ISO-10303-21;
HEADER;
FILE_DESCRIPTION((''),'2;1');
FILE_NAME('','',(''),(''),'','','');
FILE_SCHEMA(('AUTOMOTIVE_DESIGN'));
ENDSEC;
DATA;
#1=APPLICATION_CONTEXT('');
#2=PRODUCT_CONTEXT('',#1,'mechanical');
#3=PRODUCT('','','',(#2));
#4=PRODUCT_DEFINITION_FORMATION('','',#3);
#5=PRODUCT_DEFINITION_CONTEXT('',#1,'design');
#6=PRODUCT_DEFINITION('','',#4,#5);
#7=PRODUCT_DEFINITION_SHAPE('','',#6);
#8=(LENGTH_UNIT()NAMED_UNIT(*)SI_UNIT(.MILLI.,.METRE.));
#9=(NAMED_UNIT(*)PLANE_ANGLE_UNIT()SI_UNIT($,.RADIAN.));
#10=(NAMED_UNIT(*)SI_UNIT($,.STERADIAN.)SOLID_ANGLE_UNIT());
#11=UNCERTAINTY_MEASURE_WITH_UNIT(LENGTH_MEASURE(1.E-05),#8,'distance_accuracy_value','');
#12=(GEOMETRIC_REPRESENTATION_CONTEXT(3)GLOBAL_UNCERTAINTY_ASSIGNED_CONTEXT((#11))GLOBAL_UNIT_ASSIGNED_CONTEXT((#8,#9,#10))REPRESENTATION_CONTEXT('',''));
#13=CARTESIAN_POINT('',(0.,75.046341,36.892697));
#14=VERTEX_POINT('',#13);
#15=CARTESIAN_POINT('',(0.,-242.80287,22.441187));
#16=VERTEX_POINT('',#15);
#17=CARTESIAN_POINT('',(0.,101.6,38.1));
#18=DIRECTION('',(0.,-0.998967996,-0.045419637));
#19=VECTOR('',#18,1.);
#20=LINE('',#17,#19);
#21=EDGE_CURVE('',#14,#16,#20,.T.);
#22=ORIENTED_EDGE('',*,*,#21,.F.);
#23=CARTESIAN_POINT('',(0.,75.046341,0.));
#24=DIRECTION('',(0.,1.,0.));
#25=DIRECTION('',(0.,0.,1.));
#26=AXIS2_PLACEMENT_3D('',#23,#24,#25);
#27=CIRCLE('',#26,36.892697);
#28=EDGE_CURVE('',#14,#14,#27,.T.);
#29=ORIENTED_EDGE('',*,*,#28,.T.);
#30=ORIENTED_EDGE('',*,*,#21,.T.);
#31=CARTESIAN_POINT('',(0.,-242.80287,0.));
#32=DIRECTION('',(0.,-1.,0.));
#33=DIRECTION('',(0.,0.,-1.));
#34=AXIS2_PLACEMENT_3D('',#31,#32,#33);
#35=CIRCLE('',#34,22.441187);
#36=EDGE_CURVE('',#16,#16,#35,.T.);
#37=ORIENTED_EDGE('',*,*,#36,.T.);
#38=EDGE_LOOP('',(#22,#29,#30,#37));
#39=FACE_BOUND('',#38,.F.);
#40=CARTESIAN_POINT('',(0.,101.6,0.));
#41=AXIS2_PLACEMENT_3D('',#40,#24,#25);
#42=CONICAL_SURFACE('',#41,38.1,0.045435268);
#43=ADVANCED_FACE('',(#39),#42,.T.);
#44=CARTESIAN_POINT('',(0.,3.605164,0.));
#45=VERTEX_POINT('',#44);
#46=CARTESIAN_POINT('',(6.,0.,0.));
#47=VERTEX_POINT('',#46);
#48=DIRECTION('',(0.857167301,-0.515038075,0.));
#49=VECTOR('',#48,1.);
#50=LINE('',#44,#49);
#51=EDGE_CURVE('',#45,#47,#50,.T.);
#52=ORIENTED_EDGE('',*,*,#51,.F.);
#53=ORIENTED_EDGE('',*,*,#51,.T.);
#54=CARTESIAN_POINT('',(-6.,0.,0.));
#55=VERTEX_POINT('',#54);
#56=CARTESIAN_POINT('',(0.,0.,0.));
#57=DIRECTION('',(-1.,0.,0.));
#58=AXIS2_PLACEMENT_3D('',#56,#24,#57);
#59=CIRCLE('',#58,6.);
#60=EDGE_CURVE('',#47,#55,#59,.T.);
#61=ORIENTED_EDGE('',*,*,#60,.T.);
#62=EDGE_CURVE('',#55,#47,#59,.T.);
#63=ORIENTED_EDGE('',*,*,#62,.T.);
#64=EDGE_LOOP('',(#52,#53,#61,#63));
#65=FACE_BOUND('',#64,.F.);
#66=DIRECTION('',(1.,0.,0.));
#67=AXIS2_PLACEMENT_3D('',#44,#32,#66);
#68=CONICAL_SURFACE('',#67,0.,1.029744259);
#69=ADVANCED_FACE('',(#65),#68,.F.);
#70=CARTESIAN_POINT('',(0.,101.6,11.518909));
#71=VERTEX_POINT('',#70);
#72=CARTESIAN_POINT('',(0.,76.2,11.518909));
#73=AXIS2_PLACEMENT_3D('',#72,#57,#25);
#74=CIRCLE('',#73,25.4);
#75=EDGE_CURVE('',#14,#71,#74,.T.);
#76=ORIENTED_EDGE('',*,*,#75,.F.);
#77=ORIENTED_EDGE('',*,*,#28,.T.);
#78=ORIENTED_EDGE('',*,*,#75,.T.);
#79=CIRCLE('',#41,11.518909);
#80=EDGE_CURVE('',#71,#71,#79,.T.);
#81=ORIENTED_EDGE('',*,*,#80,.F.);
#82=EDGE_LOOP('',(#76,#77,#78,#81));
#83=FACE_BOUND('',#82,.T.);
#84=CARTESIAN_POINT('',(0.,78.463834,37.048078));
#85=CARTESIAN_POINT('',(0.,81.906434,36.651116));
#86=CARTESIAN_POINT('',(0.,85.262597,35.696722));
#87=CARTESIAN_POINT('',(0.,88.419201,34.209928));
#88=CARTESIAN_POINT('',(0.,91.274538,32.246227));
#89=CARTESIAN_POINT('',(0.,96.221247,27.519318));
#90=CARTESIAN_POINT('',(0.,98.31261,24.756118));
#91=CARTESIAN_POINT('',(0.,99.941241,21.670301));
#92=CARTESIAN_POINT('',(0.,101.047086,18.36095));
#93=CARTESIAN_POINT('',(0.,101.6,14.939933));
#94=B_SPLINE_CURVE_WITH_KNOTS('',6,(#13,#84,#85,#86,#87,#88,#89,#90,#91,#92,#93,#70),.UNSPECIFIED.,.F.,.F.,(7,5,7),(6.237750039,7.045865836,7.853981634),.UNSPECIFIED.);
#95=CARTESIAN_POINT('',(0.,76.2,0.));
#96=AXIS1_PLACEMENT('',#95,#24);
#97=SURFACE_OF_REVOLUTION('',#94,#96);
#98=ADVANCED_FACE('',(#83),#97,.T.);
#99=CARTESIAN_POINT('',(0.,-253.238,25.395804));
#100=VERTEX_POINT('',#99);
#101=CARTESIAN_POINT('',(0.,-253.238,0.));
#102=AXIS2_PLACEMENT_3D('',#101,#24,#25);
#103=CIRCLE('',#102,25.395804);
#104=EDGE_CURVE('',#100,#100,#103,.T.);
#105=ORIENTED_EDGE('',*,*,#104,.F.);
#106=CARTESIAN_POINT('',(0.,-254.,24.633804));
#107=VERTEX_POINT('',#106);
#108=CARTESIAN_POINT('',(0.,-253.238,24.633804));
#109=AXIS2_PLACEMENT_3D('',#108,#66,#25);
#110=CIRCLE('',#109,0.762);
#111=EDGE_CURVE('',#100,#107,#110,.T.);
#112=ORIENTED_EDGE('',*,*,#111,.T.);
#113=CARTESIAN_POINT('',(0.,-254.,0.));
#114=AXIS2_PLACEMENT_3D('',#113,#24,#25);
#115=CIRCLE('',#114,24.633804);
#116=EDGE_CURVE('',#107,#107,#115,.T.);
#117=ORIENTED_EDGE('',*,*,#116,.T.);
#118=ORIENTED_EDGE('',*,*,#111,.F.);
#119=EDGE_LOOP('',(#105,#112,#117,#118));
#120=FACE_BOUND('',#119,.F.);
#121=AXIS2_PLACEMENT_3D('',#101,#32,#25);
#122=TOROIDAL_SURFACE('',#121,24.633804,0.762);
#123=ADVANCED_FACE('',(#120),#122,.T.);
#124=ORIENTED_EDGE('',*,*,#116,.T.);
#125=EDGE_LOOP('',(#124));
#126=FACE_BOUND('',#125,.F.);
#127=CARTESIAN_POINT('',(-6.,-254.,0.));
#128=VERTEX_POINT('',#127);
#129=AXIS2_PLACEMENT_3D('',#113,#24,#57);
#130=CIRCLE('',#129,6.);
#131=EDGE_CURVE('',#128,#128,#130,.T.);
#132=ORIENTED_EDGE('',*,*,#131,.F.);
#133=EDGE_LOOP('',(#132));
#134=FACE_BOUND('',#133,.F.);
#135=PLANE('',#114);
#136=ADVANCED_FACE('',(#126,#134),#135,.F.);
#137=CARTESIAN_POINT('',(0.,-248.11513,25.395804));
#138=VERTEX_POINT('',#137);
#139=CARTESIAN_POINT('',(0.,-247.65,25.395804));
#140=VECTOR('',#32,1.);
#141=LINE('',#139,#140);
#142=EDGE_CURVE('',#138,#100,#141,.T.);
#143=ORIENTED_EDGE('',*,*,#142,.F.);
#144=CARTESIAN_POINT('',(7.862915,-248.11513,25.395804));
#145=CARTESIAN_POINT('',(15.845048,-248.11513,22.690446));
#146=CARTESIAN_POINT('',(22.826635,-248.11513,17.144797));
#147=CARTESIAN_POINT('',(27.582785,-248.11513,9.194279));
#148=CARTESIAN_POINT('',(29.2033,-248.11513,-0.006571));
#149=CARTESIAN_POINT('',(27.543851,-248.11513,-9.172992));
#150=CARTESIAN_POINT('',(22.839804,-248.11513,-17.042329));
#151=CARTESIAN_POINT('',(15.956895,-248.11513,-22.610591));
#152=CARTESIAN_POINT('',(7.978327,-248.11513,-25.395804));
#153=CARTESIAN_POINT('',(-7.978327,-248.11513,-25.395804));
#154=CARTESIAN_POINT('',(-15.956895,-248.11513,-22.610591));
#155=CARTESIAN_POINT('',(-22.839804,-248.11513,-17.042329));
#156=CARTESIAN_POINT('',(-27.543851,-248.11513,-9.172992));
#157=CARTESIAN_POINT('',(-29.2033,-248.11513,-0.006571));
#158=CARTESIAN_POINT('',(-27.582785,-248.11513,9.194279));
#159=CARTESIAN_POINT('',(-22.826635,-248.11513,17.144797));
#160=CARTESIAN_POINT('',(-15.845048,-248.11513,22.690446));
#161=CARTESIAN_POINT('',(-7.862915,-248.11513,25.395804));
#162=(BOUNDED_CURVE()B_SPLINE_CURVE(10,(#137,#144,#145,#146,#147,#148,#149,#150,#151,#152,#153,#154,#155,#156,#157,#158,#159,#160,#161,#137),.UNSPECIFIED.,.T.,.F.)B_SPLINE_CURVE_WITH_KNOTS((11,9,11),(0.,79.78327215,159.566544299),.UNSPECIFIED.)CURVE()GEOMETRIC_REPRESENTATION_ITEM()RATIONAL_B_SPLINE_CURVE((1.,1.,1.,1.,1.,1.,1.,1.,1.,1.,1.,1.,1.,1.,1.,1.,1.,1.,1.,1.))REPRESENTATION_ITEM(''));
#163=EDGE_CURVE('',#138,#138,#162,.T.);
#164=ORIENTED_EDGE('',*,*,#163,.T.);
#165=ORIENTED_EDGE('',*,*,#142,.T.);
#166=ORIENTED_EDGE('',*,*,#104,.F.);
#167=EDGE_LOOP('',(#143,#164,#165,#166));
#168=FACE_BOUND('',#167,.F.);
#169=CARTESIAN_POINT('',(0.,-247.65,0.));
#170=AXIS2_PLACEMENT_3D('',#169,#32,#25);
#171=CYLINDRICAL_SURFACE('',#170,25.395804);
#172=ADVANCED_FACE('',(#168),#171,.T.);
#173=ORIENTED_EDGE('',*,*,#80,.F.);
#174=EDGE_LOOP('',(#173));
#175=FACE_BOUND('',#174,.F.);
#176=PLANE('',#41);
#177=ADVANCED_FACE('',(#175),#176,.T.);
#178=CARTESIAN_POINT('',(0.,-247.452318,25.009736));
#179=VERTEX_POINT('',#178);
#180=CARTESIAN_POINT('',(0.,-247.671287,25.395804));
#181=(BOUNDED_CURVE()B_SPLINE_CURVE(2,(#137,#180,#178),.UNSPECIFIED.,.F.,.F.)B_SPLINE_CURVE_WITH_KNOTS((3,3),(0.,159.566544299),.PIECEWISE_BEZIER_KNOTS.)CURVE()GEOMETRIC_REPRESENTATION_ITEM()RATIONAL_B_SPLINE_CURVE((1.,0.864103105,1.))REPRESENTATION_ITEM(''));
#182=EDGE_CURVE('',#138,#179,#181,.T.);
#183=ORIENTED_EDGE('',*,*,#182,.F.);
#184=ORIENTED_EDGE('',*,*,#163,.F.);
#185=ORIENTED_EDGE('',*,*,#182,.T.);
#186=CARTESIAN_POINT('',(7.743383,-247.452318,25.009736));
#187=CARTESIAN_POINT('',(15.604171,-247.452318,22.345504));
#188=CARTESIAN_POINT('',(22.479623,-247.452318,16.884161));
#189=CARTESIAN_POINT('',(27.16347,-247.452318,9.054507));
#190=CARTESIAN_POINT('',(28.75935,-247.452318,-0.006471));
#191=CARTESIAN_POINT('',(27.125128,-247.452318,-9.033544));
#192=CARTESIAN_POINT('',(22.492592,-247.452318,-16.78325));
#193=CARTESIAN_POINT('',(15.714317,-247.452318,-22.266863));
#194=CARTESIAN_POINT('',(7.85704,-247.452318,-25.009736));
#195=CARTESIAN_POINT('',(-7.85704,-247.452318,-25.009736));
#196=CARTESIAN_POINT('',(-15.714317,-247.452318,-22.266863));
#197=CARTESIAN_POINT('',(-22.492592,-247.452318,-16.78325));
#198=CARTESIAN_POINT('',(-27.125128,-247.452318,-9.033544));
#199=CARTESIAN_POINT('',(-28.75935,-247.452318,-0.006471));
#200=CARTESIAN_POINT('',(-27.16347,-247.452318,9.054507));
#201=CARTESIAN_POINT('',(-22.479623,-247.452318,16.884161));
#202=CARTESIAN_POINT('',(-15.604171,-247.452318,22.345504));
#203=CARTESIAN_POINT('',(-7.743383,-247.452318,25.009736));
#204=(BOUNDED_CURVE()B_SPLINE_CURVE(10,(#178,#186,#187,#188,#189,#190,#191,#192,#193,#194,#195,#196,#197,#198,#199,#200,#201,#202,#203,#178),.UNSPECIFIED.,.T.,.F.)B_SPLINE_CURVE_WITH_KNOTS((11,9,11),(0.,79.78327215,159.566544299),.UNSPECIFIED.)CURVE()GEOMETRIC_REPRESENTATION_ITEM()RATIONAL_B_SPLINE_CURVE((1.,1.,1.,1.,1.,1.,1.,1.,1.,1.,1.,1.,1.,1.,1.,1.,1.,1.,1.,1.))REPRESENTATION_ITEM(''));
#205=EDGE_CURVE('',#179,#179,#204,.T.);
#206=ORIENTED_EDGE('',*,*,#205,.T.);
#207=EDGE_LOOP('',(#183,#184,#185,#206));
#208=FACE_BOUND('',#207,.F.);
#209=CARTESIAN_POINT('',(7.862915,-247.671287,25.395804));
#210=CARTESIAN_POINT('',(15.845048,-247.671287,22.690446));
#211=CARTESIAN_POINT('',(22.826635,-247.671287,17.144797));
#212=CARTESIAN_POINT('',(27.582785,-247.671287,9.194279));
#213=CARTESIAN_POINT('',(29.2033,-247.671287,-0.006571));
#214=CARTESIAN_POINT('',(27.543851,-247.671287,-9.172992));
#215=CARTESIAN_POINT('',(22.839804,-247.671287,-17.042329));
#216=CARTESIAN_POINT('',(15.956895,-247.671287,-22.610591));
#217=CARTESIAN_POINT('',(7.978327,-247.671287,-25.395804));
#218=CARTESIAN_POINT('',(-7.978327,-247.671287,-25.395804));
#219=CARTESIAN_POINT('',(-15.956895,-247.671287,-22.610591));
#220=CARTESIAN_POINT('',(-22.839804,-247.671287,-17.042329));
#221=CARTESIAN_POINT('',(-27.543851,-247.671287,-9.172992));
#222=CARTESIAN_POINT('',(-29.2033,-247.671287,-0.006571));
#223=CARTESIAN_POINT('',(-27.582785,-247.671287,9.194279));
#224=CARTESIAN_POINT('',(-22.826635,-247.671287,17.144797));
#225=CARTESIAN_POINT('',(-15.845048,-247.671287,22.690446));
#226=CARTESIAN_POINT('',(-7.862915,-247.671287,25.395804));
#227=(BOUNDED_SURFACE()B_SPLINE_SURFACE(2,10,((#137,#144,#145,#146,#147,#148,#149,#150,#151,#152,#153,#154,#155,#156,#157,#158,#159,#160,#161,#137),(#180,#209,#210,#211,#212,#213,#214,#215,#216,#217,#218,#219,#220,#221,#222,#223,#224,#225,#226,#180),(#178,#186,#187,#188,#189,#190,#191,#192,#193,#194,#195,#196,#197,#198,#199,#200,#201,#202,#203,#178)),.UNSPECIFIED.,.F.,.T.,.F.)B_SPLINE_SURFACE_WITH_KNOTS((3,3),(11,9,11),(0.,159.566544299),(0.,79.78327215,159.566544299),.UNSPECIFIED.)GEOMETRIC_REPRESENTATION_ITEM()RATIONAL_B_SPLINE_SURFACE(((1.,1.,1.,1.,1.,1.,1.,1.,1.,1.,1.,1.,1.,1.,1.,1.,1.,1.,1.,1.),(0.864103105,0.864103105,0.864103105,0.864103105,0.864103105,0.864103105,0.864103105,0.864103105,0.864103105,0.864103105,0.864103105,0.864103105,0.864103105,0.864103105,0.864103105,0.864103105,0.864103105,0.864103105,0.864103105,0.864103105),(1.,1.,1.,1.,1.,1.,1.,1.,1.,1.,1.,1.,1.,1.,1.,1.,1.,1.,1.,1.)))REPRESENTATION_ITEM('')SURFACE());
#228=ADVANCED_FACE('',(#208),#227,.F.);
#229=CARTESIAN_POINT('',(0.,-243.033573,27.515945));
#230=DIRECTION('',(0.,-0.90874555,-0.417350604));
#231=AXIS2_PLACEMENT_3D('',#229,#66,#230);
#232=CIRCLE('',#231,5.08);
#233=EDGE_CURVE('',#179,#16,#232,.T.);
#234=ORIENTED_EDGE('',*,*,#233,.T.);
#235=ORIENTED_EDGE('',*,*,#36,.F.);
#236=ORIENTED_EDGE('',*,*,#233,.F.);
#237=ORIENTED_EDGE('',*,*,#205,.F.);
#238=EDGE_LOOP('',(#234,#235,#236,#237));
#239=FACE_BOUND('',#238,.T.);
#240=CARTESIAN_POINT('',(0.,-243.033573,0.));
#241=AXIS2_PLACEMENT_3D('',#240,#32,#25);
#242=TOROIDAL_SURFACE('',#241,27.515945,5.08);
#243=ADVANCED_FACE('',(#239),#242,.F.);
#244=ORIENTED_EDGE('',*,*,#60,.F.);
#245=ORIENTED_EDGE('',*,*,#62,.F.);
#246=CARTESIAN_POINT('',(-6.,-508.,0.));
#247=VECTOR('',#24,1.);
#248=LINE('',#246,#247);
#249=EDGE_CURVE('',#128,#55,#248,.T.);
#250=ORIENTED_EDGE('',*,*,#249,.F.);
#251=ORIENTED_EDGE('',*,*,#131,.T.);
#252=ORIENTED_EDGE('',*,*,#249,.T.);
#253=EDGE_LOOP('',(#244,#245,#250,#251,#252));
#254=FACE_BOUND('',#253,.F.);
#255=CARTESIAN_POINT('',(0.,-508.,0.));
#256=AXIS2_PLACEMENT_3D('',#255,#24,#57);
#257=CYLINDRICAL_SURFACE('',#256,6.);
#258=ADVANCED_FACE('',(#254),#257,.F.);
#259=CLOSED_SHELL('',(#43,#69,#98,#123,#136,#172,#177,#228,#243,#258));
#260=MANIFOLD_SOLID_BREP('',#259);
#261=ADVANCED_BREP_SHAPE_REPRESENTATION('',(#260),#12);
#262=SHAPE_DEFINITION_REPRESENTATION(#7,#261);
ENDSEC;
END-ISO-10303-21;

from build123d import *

# Parameters (mm, degrees)
F3_R     = 0.762
F4_R     = 0.762
F5_R     = 25.4
F8_D     = 12
F8_DEPTH = 254
F8_TIP   = 3.6051637142


# Not quite as in the source:
# - a fillet or chamfer that OpenCascade refuses, or shapes differently, is made with other operations: its cross-section is extruded or revolved along the edge and cut away or added


with BuildPart() as f1:
    # F0 (on Right) → F1 (revolve)
    with BuildSketch(Plane.YZ):
        Polygon((-247.65, 25.3958042773), (-254, 25.3958042773), (-254, 0), (101.6, 0), (101.6, 38.1), (-247.65, 22.2208042773), align=None)
    revolve(axis=Axis((0, -76.2, 0), (0, 1, 0)))

    # F2: fillet of radius 5.08 on 1 edges, made by hand

    # F2_s1 → F2_t2 (revolve)
    with BuildSketch(Plane.YZ):
        with BuildLine():
            ThreePointArc((-247.65, 25.3958042773), (-245.6776265029, 23.1782755766), (-242.802840851, 22.4411879247))
            Line((-242.802840851, 22.4411879247), (-242.7982262159, 22.3396927763))
            Line((-242.7982262159, 22.3396927763), (-247.6453853649, 22.119309129))
            Line((-247.6453853649, 22.119309129), (-247.7516, 22.2208042773))
            ThreePointArc((-247.7516, 22.2208042773), (-247.7516, 23.8083042773), (-247.7423285478, 25.353401456))
            Line((-247.7423285478, 25.353401456), (-247.65, 25.3958042773))
        make_face()
    revolve(axis=Axis((0, -247.65, 0), (0, 1, 0)))

    # F3
    f3_edges = [f1.edges().sort_by_distance(p)[0] for p in [
        (0, -254, -25.395804),
    ]]
    fillet(f3_edges, radius=F3_R)

    # F4
    f4_edges = [f1.edges().sort_by_distance(p)[0] for p in [
        (0, -247.65, -25.395804),
    ]]
    fillet(f4_edges, radius=F4_R)

    # F5
    f5_edges = [f1.edges().sort_by_distance(p)[0] for p in [
        (0, 101.6, -38.1),
    ]]
    fillet(f5_edges, radius=F5_R)

    # F8
    with Locations(Plane.XZ.offset(254)):
        with Locations((0, 0)):
            Hole(F8_D / 2, depth=F8_DEPTH)
            with Locations((0, 0, -(F8_DEPTH + F8_TIP / 2))):  # 118° drill point
                Cone(0, F8_D / 2, F8_TIP, mode=Mode.SUBTRACT)


solid = f1.part
